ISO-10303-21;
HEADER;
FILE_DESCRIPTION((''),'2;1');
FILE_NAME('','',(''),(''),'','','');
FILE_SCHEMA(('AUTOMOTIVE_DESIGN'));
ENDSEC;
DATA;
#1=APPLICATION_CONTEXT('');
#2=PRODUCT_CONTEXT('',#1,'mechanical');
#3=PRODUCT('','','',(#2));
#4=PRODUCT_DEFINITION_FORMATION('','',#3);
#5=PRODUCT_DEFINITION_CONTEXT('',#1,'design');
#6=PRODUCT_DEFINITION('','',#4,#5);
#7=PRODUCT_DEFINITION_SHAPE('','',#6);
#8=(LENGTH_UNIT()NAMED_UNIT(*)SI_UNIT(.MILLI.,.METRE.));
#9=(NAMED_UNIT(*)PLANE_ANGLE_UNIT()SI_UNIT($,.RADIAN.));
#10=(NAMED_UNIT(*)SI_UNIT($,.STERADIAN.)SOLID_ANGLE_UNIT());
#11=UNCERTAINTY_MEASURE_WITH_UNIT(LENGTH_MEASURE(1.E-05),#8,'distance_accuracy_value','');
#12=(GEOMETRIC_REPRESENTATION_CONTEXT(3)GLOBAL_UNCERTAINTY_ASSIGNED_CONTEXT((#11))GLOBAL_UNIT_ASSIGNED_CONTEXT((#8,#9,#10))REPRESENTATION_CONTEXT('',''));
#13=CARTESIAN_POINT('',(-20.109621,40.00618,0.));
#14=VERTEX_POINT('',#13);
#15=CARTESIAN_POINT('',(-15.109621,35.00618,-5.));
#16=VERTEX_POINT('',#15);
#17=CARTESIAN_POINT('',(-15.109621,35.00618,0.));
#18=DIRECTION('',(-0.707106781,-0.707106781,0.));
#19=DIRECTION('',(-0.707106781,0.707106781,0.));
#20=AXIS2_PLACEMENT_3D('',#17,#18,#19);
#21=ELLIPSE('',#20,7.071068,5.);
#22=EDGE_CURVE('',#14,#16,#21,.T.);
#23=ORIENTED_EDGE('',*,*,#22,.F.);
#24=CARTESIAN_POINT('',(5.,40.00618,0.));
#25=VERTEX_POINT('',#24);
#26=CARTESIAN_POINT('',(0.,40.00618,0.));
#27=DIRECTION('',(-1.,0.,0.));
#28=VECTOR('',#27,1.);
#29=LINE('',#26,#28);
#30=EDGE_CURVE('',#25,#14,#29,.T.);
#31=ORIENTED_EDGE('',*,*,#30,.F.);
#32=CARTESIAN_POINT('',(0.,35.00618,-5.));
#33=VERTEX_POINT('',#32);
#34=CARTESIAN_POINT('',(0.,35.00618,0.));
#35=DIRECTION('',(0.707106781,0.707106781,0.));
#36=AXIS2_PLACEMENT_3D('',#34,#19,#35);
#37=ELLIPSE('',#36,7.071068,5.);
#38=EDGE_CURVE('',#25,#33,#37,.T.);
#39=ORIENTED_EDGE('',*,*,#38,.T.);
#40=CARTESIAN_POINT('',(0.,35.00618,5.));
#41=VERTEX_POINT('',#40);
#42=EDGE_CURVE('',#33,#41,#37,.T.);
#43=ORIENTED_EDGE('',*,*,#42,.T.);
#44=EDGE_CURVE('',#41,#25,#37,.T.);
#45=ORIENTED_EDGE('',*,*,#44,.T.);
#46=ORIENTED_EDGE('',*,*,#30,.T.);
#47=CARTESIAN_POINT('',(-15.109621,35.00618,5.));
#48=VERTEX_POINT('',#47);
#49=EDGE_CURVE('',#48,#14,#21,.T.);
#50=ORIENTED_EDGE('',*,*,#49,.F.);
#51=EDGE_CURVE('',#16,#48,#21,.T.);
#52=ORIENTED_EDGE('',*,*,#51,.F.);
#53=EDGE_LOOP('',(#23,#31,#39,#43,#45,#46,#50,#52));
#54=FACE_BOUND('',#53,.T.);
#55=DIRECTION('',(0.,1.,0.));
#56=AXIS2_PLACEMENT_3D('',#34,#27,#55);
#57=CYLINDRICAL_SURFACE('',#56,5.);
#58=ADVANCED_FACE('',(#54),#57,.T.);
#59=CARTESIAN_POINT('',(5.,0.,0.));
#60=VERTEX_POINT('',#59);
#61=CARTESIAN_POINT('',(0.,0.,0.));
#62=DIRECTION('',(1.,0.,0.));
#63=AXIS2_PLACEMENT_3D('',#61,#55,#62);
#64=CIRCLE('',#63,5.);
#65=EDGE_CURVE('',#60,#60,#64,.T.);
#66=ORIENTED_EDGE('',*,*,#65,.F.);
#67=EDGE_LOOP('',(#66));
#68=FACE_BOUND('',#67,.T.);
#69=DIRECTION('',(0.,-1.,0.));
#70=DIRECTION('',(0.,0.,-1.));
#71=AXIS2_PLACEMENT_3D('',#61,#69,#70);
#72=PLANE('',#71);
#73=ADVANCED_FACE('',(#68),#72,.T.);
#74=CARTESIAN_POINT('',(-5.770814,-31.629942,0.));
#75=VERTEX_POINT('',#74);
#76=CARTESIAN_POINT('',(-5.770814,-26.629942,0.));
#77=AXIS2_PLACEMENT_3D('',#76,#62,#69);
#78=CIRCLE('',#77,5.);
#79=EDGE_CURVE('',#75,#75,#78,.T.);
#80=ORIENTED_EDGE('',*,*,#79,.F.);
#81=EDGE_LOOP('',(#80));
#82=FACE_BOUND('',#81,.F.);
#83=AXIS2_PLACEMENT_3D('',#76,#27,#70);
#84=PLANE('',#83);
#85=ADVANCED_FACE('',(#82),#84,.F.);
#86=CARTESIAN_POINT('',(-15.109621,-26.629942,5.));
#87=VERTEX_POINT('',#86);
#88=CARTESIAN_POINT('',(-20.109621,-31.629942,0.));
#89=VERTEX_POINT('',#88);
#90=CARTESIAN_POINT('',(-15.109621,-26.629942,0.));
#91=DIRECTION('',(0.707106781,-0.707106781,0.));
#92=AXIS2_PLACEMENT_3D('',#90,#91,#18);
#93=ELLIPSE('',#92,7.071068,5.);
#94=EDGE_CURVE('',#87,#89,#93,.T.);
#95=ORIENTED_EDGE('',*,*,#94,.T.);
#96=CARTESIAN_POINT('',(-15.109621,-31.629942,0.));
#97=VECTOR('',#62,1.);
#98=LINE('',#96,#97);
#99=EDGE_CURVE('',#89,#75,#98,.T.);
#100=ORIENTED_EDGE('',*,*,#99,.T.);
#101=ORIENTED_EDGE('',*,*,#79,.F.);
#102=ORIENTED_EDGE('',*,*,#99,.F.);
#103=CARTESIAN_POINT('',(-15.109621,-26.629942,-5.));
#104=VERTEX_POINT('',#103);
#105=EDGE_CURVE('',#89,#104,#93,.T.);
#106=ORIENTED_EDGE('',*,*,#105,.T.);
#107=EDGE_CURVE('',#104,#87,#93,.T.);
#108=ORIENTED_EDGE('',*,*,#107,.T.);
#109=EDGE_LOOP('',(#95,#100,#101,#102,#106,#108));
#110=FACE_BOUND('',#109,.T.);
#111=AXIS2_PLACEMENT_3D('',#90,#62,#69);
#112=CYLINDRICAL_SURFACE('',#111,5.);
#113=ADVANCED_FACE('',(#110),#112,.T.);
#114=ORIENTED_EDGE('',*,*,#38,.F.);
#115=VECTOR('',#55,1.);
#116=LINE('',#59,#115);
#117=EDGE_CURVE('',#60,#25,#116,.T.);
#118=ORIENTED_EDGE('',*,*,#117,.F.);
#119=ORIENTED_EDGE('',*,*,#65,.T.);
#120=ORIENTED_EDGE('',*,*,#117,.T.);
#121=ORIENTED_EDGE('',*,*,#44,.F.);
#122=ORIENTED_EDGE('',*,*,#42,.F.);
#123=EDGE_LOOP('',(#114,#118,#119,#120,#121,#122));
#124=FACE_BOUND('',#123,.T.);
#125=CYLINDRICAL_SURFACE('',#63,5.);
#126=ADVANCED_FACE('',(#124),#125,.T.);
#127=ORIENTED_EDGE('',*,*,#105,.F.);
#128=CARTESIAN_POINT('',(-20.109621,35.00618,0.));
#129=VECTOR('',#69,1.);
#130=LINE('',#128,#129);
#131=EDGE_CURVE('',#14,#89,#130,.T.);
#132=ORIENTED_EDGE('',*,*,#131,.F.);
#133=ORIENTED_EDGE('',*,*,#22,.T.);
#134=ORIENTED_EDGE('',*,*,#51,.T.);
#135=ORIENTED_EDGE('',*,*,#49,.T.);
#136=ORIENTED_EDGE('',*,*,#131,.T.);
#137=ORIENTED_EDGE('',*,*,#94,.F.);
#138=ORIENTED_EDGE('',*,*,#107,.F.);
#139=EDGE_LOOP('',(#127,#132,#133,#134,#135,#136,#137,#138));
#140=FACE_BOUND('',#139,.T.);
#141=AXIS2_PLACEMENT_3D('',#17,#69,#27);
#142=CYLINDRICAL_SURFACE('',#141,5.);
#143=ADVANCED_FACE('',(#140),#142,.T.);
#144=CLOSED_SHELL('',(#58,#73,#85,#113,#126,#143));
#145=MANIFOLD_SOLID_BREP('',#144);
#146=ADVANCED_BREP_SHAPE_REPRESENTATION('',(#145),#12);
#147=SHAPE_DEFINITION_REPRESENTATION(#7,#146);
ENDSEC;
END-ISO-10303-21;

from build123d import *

# Parameters (mm, degrees)
F0_R = 5


with BuildPart() as f2:
    # F2: sweep along a path in F1
    with BuildLine(Plane.XY) as f2_path:
        Line((0, 0), (0, 35.0061804056))
        Line((0, 35.0061804056), (-15.1096209884, 35.0061804056))
        Line((-15.1096209884, 35.0061804056), (-15.1096209884, -26.629941538))
        Line((-15.1096209884, -26.629941538), (-5.7708141394, -26.629941538))
    # F0 (on Front) → F2 (sweep)
    with BuildSketch(Plane.XZ):
        Circle(F0_R)
    sweep(path=f2_path.line, transition=Transition.RIGHT)


solid = f2.part
